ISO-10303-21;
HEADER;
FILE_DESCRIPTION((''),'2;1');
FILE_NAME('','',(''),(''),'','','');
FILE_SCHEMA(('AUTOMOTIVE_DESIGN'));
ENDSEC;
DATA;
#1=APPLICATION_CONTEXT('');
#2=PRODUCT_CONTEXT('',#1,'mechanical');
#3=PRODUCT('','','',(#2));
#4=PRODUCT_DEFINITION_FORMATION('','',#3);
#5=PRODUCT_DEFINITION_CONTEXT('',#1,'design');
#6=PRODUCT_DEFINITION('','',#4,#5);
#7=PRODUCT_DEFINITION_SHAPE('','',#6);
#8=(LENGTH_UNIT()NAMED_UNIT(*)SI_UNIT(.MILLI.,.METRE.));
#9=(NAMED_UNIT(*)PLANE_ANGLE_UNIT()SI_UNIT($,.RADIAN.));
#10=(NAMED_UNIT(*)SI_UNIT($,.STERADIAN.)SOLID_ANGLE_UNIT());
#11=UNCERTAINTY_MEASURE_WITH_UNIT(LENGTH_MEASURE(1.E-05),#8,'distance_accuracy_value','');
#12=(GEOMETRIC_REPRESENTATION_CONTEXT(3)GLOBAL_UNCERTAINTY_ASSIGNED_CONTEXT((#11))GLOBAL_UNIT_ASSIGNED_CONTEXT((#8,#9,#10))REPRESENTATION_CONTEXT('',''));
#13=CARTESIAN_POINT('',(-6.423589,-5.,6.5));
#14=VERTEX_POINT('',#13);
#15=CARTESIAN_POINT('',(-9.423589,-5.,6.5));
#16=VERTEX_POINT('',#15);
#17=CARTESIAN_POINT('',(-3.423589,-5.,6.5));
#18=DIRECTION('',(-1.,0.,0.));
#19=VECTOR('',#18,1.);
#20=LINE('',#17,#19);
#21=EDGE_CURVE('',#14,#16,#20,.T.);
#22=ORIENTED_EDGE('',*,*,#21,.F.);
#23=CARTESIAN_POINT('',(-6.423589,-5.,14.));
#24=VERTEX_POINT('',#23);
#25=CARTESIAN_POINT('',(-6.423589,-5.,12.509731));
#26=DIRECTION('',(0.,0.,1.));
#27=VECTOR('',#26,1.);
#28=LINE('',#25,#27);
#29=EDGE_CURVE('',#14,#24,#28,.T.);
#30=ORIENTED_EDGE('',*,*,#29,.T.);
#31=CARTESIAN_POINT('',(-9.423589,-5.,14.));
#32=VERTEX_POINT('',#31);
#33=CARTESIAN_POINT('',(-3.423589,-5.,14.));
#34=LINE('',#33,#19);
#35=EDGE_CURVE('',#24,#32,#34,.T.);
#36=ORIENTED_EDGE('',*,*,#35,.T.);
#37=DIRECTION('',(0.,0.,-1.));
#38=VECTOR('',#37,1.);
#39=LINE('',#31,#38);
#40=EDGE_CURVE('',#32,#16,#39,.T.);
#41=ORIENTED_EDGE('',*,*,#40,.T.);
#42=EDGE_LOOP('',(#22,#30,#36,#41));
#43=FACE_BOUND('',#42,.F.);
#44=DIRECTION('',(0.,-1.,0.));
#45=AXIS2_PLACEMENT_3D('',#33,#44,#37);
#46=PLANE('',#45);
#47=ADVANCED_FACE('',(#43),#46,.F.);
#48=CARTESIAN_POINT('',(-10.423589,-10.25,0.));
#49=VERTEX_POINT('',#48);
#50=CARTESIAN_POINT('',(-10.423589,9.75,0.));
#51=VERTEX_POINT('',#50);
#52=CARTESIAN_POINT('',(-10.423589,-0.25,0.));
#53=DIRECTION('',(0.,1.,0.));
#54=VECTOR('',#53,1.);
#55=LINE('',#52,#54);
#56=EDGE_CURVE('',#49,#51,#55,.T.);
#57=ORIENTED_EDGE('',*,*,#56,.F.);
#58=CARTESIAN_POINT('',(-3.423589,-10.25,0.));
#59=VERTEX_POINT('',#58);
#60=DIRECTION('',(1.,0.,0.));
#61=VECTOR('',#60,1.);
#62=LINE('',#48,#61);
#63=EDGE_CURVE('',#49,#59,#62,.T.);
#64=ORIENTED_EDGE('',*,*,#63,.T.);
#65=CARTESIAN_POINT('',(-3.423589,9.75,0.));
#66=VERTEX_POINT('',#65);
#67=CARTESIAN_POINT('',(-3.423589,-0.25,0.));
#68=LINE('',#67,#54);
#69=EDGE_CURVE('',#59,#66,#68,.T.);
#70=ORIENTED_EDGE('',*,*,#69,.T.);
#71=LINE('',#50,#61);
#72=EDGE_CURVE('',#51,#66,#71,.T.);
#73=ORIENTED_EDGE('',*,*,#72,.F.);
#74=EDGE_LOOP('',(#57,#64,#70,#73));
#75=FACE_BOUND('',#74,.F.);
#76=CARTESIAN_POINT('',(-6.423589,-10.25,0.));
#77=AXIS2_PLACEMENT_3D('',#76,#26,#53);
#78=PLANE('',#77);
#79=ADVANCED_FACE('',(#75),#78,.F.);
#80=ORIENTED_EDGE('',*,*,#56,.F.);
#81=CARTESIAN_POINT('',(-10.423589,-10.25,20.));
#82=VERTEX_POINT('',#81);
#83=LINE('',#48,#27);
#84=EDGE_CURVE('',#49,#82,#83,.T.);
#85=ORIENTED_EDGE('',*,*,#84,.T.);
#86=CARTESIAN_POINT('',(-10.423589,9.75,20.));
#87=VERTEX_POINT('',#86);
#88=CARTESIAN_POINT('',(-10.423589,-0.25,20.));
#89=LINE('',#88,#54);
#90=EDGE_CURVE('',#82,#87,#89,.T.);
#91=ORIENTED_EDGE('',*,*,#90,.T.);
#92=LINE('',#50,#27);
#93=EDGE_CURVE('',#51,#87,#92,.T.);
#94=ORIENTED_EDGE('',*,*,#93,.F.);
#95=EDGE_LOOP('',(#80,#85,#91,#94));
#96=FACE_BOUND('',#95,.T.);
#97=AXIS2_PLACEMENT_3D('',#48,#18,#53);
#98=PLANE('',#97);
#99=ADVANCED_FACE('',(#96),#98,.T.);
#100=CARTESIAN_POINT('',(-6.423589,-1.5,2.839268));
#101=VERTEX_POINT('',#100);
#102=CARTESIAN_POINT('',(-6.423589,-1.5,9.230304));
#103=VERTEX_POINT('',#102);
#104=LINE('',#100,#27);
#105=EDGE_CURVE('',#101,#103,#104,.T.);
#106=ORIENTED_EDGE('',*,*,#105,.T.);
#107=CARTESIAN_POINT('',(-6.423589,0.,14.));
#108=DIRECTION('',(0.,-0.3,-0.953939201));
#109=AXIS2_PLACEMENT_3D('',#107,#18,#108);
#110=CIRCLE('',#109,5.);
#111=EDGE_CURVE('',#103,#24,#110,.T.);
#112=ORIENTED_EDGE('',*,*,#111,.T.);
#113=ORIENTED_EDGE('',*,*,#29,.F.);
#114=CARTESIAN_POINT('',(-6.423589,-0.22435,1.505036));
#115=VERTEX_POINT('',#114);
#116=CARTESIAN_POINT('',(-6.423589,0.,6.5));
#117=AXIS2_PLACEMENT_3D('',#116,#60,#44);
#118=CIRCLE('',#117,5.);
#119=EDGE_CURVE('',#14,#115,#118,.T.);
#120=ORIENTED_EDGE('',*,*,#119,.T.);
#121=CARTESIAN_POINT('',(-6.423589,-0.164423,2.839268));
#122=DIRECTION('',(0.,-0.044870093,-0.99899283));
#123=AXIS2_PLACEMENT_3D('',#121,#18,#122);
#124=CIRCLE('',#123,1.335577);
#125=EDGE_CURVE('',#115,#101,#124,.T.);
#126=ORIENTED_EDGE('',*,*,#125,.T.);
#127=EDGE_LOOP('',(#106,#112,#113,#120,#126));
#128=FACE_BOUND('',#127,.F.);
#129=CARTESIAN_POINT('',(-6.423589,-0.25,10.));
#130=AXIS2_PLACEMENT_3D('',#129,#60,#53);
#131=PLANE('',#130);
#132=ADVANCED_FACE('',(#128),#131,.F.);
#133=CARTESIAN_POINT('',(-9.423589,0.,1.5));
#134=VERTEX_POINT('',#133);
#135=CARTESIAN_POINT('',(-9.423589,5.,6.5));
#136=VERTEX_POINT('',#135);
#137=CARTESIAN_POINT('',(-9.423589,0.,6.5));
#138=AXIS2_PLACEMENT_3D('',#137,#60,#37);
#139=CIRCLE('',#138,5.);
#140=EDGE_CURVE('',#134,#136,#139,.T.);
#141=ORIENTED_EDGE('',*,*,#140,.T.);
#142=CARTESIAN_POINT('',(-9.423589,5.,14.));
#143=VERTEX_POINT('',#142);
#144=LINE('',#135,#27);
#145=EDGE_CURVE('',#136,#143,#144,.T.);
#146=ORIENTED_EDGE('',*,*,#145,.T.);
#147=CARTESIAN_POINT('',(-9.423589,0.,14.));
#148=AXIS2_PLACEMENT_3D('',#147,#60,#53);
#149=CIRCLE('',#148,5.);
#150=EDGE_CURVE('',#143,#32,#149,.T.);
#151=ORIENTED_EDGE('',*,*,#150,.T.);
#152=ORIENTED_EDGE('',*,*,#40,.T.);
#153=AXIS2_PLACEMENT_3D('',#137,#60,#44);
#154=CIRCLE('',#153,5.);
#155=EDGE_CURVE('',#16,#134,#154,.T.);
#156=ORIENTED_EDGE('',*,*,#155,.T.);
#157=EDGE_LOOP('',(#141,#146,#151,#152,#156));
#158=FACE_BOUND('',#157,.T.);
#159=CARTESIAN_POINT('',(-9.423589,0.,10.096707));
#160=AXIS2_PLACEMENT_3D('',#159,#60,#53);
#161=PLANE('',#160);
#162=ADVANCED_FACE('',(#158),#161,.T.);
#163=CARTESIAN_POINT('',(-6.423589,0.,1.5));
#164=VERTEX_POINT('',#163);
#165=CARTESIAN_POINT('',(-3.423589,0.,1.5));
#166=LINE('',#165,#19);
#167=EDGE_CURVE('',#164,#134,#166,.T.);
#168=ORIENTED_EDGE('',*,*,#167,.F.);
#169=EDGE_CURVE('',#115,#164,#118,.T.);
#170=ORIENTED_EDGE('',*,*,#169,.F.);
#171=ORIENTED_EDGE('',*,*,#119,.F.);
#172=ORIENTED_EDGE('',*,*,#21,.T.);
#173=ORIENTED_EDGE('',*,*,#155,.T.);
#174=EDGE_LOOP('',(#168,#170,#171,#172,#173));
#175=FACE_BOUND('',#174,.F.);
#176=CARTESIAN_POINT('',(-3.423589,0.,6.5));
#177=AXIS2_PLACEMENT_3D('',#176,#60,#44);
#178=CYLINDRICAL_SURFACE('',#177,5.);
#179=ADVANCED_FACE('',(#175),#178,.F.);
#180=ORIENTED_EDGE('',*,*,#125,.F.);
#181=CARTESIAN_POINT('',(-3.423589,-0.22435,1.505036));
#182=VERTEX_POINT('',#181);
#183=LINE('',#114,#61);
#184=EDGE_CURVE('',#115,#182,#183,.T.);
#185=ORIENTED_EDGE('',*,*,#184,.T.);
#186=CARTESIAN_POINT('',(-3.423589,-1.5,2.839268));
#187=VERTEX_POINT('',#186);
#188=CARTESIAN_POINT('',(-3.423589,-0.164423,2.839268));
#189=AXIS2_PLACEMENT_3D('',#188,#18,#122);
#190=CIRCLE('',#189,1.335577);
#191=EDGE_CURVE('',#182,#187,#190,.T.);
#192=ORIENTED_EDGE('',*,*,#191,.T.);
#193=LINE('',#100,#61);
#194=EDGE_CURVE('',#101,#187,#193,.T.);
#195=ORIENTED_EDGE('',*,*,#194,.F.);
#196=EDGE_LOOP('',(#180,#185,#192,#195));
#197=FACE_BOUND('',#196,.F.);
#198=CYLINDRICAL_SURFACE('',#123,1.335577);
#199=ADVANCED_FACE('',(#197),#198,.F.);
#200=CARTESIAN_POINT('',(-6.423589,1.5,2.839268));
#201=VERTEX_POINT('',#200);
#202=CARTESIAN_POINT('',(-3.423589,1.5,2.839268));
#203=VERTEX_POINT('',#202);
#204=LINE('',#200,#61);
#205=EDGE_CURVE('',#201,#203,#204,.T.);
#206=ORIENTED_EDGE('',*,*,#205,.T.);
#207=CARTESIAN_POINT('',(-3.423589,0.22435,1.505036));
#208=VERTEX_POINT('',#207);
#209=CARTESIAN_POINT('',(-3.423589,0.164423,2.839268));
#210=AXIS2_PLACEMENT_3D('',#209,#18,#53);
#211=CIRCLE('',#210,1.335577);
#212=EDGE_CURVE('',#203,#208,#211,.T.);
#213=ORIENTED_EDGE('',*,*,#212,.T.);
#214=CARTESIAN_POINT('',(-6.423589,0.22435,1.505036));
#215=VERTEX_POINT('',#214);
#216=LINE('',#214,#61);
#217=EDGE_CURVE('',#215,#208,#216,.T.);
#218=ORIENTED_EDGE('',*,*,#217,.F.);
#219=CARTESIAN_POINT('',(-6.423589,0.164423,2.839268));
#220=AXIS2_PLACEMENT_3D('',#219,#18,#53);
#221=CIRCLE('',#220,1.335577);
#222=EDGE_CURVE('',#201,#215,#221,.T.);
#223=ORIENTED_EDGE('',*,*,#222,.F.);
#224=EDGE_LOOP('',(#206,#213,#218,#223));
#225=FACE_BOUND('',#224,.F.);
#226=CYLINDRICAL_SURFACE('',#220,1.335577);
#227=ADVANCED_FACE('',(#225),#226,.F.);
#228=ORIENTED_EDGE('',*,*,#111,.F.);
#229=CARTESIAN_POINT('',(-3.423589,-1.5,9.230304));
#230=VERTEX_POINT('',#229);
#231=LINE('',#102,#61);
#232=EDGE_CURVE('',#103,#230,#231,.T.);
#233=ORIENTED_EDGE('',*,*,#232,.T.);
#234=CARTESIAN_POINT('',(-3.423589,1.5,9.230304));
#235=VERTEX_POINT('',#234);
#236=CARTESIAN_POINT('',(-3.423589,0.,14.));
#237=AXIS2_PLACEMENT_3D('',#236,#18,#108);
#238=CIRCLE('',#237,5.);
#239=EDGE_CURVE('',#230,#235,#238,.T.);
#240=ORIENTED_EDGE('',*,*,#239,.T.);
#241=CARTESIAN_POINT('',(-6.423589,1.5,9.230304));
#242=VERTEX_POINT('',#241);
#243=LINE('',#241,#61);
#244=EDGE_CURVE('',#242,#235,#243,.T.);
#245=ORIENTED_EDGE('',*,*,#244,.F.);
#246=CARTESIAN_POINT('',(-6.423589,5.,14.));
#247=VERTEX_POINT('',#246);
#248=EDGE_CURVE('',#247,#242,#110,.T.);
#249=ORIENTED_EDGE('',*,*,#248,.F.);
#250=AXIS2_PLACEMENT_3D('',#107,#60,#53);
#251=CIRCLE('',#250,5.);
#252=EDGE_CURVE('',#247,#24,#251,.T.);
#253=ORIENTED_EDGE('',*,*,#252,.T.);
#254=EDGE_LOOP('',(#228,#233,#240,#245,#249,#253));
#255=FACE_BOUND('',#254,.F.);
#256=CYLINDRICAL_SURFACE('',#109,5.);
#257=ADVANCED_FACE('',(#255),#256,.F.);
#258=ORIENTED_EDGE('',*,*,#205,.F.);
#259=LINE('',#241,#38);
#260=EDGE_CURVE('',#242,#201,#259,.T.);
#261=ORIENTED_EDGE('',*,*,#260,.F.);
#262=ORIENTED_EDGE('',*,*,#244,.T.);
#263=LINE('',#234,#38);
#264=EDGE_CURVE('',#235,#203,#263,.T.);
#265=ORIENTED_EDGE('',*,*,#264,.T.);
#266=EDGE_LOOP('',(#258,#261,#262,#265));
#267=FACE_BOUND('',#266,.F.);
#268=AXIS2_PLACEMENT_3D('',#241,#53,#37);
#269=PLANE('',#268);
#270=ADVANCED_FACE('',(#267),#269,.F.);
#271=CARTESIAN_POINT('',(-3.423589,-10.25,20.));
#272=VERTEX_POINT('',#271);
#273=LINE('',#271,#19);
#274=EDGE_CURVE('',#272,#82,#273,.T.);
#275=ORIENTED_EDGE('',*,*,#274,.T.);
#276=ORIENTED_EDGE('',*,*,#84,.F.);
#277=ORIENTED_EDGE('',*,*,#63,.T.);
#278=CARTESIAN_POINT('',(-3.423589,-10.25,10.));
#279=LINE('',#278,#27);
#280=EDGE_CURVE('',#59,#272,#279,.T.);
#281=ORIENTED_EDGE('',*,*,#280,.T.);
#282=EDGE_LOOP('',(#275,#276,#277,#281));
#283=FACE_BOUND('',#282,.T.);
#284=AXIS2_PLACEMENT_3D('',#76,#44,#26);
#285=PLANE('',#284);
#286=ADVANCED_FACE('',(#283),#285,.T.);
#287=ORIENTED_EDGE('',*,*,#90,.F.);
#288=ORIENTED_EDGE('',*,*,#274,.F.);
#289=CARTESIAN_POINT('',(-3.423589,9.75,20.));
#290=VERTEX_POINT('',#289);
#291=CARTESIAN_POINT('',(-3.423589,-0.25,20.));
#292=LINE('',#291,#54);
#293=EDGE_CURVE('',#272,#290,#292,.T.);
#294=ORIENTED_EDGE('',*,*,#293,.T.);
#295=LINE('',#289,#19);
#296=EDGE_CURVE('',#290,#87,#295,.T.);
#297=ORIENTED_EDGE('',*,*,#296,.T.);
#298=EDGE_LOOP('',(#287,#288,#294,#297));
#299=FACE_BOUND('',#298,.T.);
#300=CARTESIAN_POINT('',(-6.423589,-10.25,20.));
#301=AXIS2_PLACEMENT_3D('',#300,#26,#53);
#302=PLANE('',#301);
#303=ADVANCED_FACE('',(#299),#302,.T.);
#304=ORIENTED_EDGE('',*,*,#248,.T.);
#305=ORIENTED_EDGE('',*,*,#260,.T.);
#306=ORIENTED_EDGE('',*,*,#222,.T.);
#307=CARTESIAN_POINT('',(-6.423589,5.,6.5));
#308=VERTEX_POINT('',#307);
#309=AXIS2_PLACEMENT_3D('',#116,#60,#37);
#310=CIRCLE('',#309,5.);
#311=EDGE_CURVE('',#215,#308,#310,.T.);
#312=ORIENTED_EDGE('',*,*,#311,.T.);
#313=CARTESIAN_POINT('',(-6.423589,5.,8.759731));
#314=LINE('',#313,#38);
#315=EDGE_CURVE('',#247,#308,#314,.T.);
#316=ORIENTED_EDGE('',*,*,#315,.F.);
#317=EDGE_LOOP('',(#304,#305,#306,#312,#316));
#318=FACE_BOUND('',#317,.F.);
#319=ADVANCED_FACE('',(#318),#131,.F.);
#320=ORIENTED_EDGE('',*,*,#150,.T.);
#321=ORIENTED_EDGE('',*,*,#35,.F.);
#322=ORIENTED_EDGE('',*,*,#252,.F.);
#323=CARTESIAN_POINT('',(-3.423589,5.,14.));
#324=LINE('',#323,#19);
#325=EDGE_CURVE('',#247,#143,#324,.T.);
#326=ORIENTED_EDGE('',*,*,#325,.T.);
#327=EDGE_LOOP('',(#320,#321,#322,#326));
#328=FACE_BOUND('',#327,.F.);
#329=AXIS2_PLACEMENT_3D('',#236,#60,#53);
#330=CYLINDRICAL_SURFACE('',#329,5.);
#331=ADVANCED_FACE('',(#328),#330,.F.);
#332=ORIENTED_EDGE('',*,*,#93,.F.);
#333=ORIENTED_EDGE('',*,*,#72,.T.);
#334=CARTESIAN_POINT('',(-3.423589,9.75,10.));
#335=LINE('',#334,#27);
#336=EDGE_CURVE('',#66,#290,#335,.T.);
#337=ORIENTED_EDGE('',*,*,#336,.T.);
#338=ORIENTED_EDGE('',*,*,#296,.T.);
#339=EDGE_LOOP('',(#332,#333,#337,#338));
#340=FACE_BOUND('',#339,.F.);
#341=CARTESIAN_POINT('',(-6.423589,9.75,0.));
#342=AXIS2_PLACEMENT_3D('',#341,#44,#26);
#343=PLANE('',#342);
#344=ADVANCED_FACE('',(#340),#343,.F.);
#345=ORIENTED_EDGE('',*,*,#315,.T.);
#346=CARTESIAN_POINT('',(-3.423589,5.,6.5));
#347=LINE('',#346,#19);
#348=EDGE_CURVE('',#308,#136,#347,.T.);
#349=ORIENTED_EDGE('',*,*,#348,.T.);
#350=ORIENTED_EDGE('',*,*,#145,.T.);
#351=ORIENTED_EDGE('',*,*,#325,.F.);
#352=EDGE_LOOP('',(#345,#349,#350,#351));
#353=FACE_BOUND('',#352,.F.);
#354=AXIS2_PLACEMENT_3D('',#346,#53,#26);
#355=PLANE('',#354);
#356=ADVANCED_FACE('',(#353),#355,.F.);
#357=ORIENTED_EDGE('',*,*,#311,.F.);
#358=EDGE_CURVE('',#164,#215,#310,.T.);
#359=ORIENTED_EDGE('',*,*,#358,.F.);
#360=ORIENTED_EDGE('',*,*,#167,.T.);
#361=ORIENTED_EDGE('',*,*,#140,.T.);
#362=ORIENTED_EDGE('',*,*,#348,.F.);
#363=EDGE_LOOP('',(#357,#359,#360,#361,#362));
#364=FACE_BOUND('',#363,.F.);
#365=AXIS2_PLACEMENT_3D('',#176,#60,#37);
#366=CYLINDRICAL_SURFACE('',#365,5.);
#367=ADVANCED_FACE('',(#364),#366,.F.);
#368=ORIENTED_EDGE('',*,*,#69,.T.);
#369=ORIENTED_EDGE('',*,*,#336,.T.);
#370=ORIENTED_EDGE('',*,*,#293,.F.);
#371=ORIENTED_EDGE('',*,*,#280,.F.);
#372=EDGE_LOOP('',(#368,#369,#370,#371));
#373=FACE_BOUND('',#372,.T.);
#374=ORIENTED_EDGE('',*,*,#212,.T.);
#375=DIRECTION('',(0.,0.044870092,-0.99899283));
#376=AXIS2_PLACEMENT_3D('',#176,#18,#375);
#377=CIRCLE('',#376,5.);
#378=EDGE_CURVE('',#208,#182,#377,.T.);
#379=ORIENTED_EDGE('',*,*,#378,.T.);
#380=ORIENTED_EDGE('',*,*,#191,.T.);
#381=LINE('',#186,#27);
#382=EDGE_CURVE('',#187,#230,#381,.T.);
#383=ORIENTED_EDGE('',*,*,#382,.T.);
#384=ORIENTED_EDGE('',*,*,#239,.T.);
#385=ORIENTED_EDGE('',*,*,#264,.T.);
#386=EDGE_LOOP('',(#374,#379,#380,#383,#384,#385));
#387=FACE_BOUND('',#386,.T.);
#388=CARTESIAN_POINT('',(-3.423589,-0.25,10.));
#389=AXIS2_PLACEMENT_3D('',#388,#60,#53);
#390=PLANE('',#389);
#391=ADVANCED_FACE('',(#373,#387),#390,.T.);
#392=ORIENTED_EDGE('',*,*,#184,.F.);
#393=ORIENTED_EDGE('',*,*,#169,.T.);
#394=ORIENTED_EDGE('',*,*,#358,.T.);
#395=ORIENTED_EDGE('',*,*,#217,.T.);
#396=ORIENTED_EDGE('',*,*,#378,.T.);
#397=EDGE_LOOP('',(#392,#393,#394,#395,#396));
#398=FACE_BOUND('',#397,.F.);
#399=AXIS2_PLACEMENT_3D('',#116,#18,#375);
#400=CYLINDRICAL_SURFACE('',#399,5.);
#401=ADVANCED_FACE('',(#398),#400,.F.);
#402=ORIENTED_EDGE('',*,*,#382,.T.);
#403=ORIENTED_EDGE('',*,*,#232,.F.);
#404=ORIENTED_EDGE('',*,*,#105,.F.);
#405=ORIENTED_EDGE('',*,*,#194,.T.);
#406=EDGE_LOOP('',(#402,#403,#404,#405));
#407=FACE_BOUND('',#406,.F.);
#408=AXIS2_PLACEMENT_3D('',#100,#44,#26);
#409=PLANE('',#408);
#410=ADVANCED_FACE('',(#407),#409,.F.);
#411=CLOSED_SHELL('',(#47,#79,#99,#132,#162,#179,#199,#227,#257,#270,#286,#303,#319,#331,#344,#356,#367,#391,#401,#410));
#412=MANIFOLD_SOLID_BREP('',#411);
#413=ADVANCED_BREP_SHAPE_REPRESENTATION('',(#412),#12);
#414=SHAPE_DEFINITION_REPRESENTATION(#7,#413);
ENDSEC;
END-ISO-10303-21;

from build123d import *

# Parameters (mm, degrees)
F0_W     = 7
F0_H     = 20
F1_DEPTH = 20
F3_DEPTH = 6
F4_W     = 36.7105286568
F4_H     = 22.0389235765
F5_DEPTH = 3
F6_W     = 20
F6_H     = 20
F7_DEPTH = 3


# Not quite as in the source:
# - after a boolean that leaves OpenCascade's solid faulty, fix() repairs it


with BuildPart() as f1:
    # F0 (on Top) → F1 (new body)
    with BuildSketch(Plane.XY):
        with Locations((-6.9235885665, -0.25)):
            Rectangle(F0_W, F0_H)
    extrude(amount=F1_DEPTH)

    # F2 (on face) → F3 (cut)
    with BuildSketch(Plane.YZ.offset(-3.4235885665)):
        with BuildLine():
            Line((5, 6.5), (5, 14))
            ThreePointArc((5, 14), (0, 19), (-5, 14))
            Line((-5, 14), (-5, 6.5))
            ThreePointArc((-5, 6.5), (-3.5355339059, 2.9644660941), (0, 1.5))
            ThreePointArc((0, 1.5), (3.5355339059, 2.9644660941), (5, 6.5))
        make_face()
    extrude(amount=-F3_DEPTH, mode=Mode.SUBTRACT)

    # F4 (on face) → F5 (cut)
    with BuildSketch(Plane.YZ.offset(-3.4235885665)):
        with Locations((-1.3269511983, 11.0194617882)):
            Rectangle(F4_W, F4_H)
    extrude(amount=-F5_DEPTH, mode=Mode.SUBTRACT)

    # F6 (on face) → F7 (join)
    with BuildSketch(Plane.YZ.offset(-6.4235885665)):
        with Locations((-0.25, 10)):
            Rectangle(F6_W, F6_H)
        with BuildLine():
            ThreePointArc((-1.5, 9.2303039929), (0, 19), (1.5, 9.2303039929))
            Line((1.5, 9.2303039929), (1.5, 2.8392676962))
            ThreePointArc((1.5, 2.8392676962), (1.1297736268, 1.9163028593), (0.2243504639, 1.505035849))
            ThreePointArc((0.2243504639, 1.505035849), (0, 1.5), (-0.2243504639, 1.505035849))
            ThreePointArc((-0.2243504639, 1.505035849), (-1.1297736268, 1.9163028593), (-1.5, 2.8392676962))
            Line((-1.5, 2.8392676962), (-1.5, 9.2303039929))
        make_face(mode=Mode.SUBTRACT)
    extrude(amount=F7_DEPTH)

    add(f1.part.fix(), mode=Mode.REPLACE)


solid = f1.part
